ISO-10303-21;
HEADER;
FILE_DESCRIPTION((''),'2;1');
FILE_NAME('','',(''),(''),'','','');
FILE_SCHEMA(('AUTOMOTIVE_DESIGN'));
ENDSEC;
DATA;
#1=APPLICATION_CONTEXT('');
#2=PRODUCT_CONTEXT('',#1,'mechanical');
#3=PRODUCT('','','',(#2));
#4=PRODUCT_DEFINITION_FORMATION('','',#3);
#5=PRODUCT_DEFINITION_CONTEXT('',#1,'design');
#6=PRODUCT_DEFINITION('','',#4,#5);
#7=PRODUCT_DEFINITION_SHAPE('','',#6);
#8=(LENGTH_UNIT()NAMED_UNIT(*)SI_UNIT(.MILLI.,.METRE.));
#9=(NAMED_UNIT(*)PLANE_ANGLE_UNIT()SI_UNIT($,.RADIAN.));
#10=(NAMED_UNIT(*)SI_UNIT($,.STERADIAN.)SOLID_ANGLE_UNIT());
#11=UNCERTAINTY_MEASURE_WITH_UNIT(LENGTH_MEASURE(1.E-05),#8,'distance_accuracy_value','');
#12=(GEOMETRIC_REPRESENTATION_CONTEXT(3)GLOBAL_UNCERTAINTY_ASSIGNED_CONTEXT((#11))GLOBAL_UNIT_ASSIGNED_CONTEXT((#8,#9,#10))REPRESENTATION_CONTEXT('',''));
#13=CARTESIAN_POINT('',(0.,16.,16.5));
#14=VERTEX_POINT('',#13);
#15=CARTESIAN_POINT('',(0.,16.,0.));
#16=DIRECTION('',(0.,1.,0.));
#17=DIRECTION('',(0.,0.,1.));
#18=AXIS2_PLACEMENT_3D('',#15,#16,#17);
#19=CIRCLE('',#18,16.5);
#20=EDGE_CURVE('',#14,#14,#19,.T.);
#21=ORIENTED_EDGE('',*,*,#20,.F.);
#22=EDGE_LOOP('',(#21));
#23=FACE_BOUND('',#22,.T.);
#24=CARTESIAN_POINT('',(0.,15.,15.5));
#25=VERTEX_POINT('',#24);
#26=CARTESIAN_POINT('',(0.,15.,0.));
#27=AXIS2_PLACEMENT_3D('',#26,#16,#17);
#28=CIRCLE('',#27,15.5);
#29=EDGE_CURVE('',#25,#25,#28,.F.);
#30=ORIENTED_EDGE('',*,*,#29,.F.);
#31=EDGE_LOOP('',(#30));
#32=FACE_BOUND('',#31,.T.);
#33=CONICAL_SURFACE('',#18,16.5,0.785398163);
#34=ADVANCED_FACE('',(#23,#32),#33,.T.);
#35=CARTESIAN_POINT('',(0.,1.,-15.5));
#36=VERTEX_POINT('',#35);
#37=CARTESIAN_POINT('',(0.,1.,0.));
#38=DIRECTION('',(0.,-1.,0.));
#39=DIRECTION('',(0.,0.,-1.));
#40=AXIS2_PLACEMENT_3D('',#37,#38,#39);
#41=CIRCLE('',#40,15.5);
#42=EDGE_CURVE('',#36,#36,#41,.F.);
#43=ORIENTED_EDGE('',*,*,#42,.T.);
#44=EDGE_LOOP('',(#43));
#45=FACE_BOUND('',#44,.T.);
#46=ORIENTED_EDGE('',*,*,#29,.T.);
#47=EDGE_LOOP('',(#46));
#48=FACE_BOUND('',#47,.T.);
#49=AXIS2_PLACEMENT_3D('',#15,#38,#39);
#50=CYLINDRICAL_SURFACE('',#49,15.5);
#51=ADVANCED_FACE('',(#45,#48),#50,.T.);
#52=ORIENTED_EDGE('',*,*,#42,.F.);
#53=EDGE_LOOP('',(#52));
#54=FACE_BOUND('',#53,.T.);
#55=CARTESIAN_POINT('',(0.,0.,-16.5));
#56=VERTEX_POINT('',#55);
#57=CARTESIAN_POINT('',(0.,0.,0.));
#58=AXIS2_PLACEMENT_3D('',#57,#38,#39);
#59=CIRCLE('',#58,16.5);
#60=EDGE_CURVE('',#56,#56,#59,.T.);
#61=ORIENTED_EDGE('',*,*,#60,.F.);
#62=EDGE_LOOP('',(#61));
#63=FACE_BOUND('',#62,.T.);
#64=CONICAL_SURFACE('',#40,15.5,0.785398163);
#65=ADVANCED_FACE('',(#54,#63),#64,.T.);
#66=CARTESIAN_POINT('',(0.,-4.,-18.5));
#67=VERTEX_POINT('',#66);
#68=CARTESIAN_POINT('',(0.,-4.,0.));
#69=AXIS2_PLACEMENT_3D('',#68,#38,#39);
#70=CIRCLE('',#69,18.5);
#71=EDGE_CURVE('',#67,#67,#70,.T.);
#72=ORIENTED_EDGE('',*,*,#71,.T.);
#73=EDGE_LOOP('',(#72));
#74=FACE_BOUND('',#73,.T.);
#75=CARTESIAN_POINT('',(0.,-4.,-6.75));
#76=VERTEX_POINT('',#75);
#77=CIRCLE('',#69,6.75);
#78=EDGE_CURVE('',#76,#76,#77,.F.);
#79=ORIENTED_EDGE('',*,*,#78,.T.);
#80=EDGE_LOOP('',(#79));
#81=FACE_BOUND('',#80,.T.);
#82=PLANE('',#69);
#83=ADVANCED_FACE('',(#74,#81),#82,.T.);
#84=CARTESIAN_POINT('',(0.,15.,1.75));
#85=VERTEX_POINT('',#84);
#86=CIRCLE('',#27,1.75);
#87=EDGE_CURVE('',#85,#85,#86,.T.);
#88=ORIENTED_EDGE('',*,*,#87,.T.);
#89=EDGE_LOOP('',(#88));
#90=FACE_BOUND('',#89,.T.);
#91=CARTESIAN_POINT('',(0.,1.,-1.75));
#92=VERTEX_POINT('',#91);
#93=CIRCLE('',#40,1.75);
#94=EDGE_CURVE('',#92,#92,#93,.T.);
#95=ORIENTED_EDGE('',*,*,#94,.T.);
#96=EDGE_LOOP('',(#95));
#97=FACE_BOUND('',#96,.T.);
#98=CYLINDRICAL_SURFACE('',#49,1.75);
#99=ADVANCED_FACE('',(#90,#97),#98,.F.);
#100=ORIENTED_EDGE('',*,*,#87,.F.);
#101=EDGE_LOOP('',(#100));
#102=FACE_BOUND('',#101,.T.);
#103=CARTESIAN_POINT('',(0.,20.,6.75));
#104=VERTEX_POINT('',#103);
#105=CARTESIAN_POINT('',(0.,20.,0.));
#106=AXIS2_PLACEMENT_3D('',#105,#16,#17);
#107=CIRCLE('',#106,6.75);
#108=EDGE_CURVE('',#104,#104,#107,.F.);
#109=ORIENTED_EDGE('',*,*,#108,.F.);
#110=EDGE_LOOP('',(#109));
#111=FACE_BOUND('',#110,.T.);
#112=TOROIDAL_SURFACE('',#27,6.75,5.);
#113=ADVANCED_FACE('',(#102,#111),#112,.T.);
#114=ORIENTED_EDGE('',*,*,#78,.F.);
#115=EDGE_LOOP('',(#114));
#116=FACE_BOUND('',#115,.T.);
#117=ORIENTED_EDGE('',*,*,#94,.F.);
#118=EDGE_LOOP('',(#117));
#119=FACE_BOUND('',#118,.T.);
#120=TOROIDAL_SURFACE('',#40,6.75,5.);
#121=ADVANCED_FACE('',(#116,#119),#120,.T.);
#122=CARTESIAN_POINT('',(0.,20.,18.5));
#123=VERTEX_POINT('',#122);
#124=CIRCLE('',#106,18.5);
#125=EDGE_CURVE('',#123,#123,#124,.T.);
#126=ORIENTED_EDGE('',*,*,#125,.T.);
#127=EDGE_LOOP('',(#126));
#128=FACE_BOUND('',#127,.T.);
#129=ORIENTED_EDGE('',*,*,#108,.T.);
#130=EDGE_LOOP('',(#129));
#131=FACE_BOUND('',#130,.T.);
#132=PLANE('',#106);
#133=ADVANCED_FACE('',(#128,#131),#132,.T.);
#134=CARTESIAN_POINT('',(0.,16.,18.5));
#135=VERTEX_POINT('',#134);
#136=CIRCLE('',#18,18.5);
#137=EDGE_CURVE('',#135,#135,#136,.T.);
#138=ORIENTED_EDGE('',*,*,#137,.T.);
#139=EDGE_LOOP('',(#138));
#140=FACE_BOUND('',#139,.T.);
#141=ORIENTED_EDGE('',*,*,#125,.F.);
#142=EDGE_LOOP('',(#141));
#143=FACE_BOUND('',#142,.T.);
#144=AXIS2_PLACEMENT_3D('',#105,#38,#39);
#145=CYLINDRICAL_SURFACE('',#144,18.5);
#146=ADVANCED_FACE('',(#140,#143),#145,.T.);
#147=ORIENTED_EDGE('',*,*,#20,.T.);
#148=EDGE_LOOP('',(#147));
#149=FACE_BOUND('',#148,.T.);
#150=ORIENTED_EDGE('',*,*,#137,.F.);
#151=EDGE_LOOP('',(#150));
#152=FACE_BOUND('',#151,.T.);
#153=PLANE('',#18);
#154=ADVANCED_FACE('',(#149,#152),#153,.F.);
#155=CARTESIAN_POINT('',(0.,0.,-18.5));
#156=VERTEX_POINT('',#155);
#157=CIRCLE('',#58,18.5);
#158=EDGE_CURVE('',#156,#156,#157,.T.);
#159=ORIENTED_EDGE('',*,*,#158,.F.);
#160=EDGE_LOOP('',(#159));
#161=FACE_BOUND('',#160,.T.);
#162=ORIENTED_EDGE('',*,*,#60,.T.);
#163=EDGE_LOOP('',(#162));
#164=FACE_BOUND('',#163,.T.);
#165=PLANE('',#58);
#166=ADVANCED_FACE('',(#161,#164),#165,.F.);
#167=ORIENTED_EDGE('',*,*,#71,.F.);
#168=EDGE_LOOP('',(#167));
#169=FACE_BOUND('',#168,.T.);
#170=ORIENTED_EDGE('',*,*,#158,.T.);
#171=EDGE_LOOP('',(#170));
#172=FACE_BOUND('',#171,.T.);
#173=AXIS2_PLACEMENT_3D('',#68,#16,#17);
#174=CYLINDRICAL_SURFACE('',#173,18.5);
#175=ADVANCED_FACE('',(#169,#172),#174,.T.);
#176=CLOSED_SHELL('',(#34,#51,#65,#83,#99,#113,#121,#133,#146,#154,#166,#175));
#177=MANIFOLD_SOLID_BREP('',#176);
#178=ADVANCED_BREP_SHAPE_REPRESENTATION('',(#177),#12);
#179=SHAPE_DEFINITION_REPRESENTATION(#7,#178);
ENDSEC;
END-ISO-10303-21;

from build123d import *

# Parameters (mm, degrees)
SKETCH1_R           = 15.5
SKETCH1_R_2         = 1.75
BOSS_EXTRUDE1_DEPTH = 16
SKETCH2_R           = 18.5
SKETCH2_R_2         = 1.75
BOSS_EXTRUDE2_DEPTH = 4
BOSS_EXTRUDE3_START = 4
SKETCH3_R           = 18.5
SKETCH3_R_2         = 1.75
BOSS_EXTRUDE3_DEPTH = 4
FILLET1_R           = 5
CHAMFER1_SIZE       = 1


with BuildPart() as part:
    # Sketch1 → Boss-Extrude1 (new body)
    with BuildSketch(Plane(origin=(0, 0, 0), x_dir=(1, 0, 0), z_dir=(0, 1, 0))):
        with Locations(Location((0, 0, 0), (0, 0, 270))):
            Circle(SKETCH1_R)
        with Locations(Location((0, 0, 0), (0, 0, 270))):
            Circle(SKETCH1_R_2, mode=Mode.SUBTRACT)
    extrude(amount=BOSS_EXTRUDE1_DEPTH)

    # Sketch2 → Boss-Extrude2 (add)
    with BuildSketch(Plane(origin=(0, 16, 0), x_dir=(1, 0, 0), z_dir=(0, 1, 0))):
        with Locations(Location((0, 0, 0), (0, 0, 270))):
            Circle(SKETCH2_R)
        with Locations(Location((0, 0, 0), (0, 0, 270))):
            Circle(SKETCH2_R_2, mode=Mode.SUBTRACT)
    extrude(amount=BOSS_EXTRUDE2_DEPTH)

    # Sketch3 → Boss-Extrude3 (add)
    with BuildSketch(Plane.XZ.offset(BOSS_EXTRUDE3_START)):
        with Locations(Location((0, 0, 0), (0, 0, 90))):
            Circle(SKETCH3_R)
        with Locations(Location((0, 0, 0), (0, 0, 270))):
            Circle(SKETCH3_R_2, mode=Mode.SUBTRACT)
    extrude(amount=-BOSS_EXTRUDE3_DEPTH)

    # Fillet1
    # the kernel refuses this fillet: 5 mm, written as the material it takes off along each edge
    with BuildSketch(Plane(origin=(0, 20, 0), x_dir=(0, 0, 1), z_dir=(-1, 0, 0))) as fillet1_piece_1:
        with BuildLine():
            CenterArc((1.75 + FILLET1_R, -FILLET1_R), FILLET1_R, 90, 90)
            Line((1.75, -FILLET1_R), (1.75, 0))
            Line((1.75, 0), (1.75 + FILLET1_R, 0))
        make_face()
    revolve(axis=Axis((0, 20, 0), (0, 1, 0)), mode=Mode.SUBTRACT)
    with BuildSketch(Plane(origin=(0, -4, 0), x_dir=(0, 0, -1), z_dir=(-1, 0, 0))) as fillet1_piece_2:
        with BuildLine():
            CenterArc((1.75 + FILLET1_R, -FILLET1_R), FILLET1_R, 90, 90)
            Line((1.75, -FILLET1_R), (1.75, 0))
            Line((1.75, 0), (1.75 + FILLET1_R, 0))
        make_face()
    revolve(axis=Axis((0, -4, 0), (0, -1, 0)), mode=Mode.SUBTRACT)

    # Chamfer1
    chamfer1_edges = [part.edges().sort_by_distance(p)[0] for p in [
        (0, 0, -15.5),
        (0, 16, -15.5),
    ]]
    chamfer(chamfer1_edges, length=CHAMFER1_SIZE)


solid = part.part
